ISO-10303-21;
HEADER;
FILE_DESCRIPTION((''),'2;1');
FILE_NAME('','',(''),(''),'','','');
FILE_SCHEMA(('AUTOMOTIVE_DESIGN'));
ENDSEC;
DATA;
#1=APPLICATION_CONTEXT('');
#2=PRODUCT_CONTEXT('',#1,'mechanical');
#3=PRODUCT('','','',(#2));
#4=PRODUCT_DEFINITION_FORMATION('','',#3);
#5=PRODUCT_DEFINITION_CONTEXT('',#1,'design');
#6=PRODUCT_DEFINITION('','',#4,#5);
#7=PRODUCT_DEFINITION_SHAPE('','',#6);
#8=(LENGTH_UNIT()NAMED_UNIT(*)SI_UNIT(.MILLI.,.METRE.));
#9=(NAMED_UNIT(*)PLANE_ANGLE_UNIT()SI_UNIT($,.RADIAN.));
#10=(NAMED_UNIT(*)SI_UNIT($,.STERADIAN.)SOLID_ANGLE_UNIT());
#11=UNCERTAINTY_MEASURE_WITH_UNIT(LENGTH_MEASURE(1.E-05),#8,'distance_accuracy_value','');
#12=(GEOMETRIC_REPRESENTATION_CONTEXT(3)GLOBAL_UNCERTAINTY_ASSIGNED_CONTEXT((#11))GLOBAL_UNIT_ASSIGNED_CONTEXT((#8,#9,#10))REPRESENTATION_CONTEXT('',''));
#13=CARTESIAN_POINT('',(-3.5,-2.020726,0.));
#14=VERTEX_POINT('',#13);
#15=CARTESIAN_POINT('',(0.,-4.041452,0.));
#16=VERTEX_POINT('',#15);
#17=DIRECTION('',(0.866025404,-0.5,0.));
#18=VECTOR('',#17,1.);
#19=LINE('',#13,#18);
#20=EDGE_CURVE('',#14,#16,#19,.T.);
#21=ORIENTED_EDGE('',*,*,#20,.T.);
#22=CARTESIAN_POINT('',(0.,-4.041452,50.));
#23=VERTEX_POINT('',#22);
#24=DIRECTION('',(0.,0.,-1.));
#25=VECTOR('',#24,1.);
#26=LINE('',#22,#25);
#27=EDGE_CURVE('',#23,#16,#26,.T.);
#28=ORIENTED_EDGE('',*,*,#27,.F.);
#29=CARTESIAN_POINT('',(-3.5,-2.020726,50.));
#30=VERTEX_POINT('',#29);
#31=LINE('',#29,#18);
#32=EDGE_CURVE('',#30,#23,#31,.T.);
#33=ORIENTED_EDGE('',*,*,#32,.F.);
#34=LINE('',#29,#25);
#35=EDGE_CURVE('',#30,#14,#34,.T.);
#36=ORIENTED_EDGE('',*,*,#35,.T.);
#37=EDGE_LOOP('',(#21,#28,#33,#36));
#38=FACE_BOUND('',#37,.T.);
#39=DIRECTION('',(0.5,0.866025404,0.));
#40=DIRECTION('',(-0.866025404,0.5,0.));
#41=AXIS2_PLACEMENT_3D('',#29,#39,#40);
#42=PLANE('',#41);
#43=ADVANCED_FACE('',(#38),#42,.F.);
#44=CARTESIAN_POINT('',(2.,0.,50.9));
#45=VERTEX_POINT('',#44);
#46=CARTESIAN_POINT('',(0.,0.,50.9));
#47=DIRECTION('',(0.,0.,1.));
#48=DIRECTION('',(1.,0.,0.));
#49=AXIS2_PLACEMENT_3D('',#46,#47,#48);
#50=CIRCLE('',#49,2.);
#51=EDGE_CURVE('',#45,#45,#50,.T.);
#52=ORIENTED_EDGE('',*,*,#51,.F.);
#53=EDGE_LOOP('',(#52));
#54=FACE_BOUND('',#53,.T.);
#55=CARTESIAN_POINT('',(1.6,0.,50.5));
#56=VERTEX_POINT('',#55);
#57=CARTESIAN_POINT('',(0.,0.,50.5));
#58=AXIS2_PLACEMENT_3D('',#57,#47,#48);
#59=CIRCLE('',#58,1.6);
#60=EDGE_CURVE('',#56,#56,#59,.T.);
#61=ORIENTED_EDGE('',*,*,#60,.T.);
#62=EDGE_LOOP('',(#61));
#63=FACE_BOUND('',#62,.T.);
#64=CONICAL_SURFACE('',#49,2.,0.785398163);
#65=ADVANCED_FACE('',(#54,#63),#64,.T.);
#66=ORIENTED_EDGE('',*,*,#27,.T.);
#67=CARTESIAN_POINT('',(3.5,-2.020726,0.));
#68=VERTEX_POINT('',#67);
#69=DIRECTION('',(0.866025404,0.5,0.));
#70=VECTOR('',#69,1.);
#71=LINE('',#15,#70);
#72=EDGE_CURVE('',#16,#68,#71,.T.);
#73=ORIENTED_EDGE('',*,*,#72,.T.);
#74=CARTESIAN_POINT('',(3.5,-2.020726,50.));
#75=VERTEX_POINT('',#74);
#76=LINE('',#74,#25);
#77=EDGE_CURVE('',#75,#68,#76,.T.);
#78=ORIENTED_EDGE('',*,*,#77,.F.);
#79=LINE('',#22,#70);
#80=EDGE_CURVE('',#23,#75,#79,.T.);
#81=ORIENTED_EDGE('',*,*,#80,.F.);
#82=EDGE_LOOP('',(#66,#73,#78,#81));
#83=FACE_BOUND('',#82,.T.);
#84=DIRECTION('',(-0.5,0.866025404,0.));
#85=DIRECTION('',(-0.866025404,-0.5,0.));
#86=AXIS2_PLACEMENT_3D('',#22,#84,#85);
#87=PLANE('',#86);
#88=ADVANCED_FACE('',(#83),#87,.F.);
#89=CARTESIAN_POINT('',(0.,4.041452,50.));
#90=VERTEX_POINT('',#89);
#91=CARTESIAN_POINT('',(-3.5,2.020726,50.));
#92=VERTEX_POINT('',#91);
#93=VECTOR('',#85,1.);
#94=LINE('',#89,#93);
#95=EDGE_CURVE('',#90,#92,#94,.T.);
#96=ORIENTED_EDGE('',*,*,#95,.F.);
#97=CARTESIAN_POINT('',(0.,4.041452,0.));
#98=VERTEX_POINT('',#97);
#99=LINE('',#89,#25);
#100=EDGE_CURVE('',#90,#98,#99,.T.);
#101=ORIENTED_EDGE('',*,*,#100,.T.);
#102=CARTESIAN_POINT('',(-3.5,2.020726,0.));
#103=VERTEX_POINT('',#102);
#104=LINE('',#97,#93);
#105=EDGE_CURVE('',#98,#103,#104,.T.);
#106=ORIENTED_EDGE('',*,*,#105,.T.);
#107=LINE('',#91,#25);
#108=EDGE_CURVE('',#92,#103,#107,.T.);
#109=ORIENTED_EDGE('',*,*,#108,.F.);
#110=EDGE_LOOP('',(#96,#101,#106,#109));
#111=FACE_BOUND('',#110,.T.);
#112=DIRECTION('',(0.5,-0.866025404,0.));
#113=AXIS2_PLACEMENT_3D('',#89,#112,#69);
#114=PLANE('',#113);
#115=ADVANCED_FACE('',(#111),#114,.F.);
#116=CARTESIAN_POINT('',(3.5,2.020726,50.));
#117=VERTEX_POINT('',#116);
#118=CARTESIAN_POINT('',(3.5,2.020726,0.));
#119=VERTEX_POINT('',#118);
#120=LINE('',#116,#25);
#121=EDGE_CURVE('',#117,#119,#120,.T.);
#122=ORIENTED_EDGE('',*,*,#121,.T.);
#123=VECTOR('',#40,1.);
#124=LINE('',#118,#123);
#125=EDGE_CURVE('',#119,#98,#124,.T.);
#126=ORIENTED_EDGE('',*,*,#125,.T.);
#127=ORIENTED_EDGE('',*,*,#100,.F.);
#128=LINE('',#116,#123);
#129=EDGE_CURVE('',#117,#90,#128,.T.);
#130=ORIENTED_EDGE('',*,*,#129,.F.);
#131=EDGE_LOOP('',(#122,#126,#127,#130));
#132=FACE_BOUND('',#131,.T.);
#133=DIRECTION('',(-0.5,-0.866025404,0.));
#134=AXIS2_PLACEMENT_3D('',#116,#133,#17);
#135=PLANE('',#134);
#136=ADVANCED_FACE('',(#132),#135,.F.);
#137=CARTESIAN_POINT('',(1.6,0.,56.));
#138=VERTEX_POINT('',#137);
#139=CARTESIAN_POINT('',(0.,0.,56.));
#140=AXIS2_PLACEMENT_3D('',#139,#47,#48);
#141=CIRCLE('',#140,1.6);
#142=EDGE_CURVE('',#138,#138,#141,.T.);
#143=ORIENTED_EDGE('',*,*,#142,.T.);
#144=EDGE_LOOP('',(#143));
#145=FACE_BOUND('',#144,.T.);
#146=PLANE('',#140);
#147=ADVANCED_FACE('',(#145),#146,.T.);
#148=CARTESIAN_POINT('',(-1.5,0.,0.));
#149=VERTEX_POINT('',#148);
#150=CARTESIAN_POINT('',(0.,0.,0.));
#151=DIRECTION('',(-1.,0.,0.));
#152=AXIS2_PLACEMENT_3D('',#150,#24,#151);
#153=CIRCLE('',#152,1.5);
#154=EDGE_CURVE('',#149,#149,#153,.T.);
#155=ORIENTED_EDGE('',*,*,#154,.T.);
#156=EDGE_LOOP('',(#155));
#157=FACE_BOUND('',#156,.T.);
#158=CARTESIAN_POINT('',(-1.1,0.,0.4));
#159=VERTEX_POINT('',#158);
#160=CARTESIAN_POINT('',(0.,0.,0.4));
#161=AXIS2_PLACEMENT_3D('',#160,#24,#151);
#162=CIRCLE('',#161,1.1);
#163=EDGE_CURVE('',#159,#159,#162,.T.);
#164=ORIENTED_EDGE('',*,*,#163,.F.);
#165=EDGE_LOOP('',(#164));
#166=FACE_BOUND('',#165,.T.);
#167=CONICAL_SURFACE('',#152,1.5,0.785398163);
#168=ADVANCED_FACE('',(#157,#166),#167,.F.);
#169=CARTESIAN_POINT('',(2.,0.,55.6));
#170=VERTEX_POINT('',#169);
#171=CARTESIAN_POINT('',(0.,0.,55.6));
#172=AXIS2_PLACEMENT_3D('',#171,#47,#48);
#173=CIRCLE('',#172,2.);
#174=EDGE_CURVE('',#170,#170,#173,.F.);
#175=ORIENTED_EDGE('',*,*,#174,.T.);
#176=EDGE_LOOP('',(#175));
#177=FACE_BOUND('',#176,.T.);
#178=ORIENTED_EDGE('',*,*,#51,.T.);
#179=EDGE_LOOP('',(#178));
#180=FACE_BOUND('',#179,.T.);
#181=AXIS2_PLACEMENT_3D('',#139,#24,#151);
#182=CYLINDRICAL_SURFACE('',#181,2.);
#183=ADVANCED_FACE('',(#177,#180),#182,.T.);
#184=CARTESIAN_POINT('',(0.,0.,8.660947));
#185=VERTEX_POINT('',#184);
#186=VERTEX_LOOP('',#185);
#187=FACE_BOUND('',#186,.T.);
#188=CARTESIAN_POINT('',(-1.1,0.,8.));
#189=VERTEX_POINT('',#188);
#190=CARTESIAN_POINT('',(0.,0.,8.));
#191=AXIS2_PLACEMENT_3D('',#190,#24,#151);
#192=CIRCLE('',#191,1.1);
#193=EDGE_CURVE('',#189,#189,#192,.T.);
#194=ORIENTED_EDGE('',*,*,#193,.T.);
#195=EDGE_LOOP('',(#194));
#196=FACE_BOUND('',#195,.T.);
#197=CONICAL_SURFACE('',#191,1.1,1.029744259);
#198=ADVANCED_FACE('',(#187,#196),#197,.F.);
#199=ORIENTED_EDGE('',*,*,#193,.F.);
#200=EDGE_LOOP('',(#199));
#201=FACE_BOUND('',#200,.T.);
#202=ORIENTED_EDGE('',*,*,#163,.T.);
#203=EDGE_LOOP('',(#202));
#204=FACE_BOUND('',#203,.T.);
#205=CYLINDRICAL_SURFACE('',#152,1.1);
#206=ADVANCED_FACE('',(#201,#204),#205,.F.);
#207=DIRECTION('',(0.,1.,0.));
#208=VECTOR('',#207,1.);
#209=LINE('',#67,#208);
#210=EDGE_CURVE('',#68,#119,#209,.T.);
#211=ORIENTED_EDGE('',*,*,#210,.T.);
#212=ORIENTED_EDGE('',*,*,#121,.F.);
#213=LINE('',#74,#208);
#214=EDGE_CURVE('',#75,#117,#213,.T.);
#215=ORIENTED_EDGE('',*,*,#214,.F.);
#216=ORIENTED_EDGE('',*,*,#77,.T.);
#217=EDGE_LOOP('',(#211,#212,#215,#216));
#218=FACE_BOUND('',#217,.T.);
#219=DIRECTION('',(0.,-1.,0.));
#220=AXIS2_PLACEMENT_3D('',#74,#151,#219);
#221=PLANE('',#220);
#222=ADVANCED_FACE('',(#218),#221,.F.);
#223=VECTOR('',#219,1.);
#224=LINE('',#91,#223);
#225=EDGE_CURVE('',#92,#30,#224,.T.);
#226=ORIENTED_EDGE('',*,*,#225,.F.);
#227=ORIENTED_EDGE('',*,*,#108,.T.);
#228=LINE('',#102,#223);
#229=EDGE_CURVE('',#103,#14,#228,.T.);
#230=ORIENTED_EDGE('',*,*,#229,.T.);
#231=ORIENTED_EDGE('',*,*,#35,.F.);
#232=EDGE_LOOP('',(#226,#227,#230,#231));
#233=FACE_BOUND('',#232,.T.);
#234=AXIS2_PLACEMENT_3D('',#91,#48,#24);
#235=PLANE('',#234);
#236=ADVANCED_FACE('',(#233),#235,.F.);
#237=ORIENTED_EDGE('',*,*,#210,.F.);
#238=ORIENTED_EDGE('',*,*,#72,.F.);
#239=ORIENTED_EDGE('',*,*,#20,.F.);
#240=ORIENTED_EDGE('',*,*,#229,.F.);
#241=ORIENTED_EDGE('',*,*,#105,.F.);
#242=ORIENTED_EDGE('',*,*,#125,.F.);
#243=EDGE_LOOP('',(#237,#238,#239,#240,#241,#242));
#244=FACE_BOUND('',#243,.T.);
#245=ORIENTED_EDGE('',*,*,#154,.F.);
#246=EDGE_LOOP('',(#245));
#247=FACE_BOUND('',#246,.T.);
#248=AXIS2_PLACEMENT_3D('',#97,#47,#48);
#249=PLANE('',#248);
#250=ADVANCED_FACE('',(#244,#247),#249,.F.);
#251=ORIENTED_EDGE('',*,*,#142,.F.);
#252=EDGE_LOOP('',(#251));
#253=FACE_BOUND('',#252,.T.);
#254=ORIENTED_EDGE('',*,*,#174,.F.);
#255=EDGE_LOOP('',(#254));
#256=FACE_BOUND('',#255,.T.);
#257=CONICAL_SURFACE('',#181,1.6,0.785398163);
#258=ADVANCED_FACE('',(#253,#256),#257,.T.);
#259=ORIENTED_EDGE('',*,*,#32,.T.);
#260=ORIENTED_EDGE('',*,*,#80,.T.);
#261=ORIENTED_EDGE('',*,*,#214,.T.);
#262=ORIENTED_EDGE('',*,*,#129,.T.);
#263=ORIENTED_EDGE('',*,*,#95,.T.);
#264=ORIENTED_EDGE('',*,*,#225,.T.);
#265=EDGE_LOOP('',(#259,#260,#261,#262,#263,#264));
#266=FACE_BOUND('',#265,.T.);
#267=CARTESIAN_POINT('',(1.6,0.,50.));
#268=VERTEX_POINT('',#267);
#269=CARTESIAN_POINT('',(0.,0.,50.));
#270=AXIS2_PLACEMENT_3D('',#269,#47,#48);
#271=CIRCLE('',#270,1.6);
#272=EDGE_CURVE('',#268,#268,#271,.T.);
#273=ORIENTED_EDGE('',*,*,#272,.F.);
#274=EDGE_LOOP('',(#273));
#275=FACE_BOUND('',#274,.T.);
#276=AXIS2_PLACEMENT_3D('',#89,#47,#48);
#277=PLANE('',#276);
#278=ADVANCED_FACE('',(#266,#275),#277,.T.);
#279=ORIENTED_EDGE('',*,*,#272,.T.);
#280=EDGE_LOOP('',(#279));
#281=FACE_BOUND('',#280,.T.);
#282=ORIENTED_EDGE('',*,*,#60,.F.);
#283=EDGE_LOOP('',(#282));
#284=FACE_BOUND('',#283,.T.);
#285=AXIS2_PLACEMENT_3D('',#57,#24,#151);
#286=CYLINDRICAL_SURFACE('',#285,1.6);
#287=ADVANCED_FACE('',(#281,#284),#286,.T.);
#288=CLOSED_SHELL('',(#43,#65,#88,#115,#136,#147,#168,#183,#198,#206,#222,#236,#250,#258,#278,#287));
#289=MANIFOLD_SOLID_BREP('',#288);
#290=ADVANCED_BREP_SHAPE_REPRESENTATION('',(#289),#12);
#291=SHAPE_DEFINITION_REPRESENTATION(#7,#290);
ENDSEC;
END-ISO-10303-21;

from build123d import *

# Parameters (mm, degrees)
EXTRUDE_1_DEPTH             = 50
SKETCH_2_R                  = 2
EXTRUDE_2_DEPTH             = 6
SKETCH_3_R                  = 2
SKETCH_3_R_2                = 1.6
CUT_EXTRUDE_3_DEPTH         = 0.5
CHAMFER_1_SIZE              = 0.4
HOLE_WIZARD_M31_D           = 2.2
HOLE_WIZARD_M31_DEPTH       = 8
HOLE_WIZARD_M31_CSINK_D     = 3
HOLE_WIZARD_M31_CSINK_ANGLE = 90
HOLE_WIZARD_M31_TIP         = 0.660946681


with BuildPart() as part:
    # Эскиз1 → Вытянуть1 (new body)
    with BuildSketch(Plane.XY):
        Polygon((0, 4.041451884), (-3.5, 2.020725942), (-3.5, -2.020725942), (0, -4.041451884), (3.5, -2.020725942), (3.5, 2.020725942), align=None)
    extrude(amount=EXTRUDE_1_DEPTH)

    # Эскиз2 → Вытянуть2 (add)
    with BuildSketch(Plane.XY.offset(50)):
        Circle(SKETCH_2_R)
    extrude(amount=EXTRUDE_2_DEPTH)

    # Эскиз3 → Вырез-Вытянуть3 (cut)
    with BuildSketch(Plane.XY.offset(50)):
        Circle(SKETCH_3_R)
        Circle(SKETCH_3_R_2, mode=Mode.SUBTRACT)
    extrude(amount=CUT_EXTRUDE_3_DEPTH, mode=Mode.SUBTRACT)

    # Фаска1
    chamfer_1_edges = [part.edges().sort_by_distance(p)[0] for p in [
        (-2, 0, 56),
        (-2, 0, 50.5),
    ]]
    chamfer(chamfer_1_edges, length=CHAMFER_1_SIZE - 0.0001)  # a hair under: the kernel refuses the full size

    # Отверстие с зазором M31
    with Locations(Plane(origin=(0, 0, 0), x_dir=(-1, 0, 0), z_dir=(0, 0, -1))):
        with Locations((0, 0)):
            CounterSinkHole(HOLE_WIZARD_M31_D / 2, HOLE_WIZARD_M31_CSINK_D / 2, depth=HOLE_WIZARD_M31_DEPTH, counter_sink_angle=HOLE_WIZARD_M31_CSINK_ANGLE)
            with Locations((0, 0, -(HOLE_WIZARD_M31_DEPTH + HOLE_WIZARD_M31_TIP / 2))):  # 118° drill point
                Cone(0, HOLE_WIZARD_M31_D / 2, HOLE_WIZARD_M31_TIP, mode=Mode.SUBTRACT)


solid = part.part
